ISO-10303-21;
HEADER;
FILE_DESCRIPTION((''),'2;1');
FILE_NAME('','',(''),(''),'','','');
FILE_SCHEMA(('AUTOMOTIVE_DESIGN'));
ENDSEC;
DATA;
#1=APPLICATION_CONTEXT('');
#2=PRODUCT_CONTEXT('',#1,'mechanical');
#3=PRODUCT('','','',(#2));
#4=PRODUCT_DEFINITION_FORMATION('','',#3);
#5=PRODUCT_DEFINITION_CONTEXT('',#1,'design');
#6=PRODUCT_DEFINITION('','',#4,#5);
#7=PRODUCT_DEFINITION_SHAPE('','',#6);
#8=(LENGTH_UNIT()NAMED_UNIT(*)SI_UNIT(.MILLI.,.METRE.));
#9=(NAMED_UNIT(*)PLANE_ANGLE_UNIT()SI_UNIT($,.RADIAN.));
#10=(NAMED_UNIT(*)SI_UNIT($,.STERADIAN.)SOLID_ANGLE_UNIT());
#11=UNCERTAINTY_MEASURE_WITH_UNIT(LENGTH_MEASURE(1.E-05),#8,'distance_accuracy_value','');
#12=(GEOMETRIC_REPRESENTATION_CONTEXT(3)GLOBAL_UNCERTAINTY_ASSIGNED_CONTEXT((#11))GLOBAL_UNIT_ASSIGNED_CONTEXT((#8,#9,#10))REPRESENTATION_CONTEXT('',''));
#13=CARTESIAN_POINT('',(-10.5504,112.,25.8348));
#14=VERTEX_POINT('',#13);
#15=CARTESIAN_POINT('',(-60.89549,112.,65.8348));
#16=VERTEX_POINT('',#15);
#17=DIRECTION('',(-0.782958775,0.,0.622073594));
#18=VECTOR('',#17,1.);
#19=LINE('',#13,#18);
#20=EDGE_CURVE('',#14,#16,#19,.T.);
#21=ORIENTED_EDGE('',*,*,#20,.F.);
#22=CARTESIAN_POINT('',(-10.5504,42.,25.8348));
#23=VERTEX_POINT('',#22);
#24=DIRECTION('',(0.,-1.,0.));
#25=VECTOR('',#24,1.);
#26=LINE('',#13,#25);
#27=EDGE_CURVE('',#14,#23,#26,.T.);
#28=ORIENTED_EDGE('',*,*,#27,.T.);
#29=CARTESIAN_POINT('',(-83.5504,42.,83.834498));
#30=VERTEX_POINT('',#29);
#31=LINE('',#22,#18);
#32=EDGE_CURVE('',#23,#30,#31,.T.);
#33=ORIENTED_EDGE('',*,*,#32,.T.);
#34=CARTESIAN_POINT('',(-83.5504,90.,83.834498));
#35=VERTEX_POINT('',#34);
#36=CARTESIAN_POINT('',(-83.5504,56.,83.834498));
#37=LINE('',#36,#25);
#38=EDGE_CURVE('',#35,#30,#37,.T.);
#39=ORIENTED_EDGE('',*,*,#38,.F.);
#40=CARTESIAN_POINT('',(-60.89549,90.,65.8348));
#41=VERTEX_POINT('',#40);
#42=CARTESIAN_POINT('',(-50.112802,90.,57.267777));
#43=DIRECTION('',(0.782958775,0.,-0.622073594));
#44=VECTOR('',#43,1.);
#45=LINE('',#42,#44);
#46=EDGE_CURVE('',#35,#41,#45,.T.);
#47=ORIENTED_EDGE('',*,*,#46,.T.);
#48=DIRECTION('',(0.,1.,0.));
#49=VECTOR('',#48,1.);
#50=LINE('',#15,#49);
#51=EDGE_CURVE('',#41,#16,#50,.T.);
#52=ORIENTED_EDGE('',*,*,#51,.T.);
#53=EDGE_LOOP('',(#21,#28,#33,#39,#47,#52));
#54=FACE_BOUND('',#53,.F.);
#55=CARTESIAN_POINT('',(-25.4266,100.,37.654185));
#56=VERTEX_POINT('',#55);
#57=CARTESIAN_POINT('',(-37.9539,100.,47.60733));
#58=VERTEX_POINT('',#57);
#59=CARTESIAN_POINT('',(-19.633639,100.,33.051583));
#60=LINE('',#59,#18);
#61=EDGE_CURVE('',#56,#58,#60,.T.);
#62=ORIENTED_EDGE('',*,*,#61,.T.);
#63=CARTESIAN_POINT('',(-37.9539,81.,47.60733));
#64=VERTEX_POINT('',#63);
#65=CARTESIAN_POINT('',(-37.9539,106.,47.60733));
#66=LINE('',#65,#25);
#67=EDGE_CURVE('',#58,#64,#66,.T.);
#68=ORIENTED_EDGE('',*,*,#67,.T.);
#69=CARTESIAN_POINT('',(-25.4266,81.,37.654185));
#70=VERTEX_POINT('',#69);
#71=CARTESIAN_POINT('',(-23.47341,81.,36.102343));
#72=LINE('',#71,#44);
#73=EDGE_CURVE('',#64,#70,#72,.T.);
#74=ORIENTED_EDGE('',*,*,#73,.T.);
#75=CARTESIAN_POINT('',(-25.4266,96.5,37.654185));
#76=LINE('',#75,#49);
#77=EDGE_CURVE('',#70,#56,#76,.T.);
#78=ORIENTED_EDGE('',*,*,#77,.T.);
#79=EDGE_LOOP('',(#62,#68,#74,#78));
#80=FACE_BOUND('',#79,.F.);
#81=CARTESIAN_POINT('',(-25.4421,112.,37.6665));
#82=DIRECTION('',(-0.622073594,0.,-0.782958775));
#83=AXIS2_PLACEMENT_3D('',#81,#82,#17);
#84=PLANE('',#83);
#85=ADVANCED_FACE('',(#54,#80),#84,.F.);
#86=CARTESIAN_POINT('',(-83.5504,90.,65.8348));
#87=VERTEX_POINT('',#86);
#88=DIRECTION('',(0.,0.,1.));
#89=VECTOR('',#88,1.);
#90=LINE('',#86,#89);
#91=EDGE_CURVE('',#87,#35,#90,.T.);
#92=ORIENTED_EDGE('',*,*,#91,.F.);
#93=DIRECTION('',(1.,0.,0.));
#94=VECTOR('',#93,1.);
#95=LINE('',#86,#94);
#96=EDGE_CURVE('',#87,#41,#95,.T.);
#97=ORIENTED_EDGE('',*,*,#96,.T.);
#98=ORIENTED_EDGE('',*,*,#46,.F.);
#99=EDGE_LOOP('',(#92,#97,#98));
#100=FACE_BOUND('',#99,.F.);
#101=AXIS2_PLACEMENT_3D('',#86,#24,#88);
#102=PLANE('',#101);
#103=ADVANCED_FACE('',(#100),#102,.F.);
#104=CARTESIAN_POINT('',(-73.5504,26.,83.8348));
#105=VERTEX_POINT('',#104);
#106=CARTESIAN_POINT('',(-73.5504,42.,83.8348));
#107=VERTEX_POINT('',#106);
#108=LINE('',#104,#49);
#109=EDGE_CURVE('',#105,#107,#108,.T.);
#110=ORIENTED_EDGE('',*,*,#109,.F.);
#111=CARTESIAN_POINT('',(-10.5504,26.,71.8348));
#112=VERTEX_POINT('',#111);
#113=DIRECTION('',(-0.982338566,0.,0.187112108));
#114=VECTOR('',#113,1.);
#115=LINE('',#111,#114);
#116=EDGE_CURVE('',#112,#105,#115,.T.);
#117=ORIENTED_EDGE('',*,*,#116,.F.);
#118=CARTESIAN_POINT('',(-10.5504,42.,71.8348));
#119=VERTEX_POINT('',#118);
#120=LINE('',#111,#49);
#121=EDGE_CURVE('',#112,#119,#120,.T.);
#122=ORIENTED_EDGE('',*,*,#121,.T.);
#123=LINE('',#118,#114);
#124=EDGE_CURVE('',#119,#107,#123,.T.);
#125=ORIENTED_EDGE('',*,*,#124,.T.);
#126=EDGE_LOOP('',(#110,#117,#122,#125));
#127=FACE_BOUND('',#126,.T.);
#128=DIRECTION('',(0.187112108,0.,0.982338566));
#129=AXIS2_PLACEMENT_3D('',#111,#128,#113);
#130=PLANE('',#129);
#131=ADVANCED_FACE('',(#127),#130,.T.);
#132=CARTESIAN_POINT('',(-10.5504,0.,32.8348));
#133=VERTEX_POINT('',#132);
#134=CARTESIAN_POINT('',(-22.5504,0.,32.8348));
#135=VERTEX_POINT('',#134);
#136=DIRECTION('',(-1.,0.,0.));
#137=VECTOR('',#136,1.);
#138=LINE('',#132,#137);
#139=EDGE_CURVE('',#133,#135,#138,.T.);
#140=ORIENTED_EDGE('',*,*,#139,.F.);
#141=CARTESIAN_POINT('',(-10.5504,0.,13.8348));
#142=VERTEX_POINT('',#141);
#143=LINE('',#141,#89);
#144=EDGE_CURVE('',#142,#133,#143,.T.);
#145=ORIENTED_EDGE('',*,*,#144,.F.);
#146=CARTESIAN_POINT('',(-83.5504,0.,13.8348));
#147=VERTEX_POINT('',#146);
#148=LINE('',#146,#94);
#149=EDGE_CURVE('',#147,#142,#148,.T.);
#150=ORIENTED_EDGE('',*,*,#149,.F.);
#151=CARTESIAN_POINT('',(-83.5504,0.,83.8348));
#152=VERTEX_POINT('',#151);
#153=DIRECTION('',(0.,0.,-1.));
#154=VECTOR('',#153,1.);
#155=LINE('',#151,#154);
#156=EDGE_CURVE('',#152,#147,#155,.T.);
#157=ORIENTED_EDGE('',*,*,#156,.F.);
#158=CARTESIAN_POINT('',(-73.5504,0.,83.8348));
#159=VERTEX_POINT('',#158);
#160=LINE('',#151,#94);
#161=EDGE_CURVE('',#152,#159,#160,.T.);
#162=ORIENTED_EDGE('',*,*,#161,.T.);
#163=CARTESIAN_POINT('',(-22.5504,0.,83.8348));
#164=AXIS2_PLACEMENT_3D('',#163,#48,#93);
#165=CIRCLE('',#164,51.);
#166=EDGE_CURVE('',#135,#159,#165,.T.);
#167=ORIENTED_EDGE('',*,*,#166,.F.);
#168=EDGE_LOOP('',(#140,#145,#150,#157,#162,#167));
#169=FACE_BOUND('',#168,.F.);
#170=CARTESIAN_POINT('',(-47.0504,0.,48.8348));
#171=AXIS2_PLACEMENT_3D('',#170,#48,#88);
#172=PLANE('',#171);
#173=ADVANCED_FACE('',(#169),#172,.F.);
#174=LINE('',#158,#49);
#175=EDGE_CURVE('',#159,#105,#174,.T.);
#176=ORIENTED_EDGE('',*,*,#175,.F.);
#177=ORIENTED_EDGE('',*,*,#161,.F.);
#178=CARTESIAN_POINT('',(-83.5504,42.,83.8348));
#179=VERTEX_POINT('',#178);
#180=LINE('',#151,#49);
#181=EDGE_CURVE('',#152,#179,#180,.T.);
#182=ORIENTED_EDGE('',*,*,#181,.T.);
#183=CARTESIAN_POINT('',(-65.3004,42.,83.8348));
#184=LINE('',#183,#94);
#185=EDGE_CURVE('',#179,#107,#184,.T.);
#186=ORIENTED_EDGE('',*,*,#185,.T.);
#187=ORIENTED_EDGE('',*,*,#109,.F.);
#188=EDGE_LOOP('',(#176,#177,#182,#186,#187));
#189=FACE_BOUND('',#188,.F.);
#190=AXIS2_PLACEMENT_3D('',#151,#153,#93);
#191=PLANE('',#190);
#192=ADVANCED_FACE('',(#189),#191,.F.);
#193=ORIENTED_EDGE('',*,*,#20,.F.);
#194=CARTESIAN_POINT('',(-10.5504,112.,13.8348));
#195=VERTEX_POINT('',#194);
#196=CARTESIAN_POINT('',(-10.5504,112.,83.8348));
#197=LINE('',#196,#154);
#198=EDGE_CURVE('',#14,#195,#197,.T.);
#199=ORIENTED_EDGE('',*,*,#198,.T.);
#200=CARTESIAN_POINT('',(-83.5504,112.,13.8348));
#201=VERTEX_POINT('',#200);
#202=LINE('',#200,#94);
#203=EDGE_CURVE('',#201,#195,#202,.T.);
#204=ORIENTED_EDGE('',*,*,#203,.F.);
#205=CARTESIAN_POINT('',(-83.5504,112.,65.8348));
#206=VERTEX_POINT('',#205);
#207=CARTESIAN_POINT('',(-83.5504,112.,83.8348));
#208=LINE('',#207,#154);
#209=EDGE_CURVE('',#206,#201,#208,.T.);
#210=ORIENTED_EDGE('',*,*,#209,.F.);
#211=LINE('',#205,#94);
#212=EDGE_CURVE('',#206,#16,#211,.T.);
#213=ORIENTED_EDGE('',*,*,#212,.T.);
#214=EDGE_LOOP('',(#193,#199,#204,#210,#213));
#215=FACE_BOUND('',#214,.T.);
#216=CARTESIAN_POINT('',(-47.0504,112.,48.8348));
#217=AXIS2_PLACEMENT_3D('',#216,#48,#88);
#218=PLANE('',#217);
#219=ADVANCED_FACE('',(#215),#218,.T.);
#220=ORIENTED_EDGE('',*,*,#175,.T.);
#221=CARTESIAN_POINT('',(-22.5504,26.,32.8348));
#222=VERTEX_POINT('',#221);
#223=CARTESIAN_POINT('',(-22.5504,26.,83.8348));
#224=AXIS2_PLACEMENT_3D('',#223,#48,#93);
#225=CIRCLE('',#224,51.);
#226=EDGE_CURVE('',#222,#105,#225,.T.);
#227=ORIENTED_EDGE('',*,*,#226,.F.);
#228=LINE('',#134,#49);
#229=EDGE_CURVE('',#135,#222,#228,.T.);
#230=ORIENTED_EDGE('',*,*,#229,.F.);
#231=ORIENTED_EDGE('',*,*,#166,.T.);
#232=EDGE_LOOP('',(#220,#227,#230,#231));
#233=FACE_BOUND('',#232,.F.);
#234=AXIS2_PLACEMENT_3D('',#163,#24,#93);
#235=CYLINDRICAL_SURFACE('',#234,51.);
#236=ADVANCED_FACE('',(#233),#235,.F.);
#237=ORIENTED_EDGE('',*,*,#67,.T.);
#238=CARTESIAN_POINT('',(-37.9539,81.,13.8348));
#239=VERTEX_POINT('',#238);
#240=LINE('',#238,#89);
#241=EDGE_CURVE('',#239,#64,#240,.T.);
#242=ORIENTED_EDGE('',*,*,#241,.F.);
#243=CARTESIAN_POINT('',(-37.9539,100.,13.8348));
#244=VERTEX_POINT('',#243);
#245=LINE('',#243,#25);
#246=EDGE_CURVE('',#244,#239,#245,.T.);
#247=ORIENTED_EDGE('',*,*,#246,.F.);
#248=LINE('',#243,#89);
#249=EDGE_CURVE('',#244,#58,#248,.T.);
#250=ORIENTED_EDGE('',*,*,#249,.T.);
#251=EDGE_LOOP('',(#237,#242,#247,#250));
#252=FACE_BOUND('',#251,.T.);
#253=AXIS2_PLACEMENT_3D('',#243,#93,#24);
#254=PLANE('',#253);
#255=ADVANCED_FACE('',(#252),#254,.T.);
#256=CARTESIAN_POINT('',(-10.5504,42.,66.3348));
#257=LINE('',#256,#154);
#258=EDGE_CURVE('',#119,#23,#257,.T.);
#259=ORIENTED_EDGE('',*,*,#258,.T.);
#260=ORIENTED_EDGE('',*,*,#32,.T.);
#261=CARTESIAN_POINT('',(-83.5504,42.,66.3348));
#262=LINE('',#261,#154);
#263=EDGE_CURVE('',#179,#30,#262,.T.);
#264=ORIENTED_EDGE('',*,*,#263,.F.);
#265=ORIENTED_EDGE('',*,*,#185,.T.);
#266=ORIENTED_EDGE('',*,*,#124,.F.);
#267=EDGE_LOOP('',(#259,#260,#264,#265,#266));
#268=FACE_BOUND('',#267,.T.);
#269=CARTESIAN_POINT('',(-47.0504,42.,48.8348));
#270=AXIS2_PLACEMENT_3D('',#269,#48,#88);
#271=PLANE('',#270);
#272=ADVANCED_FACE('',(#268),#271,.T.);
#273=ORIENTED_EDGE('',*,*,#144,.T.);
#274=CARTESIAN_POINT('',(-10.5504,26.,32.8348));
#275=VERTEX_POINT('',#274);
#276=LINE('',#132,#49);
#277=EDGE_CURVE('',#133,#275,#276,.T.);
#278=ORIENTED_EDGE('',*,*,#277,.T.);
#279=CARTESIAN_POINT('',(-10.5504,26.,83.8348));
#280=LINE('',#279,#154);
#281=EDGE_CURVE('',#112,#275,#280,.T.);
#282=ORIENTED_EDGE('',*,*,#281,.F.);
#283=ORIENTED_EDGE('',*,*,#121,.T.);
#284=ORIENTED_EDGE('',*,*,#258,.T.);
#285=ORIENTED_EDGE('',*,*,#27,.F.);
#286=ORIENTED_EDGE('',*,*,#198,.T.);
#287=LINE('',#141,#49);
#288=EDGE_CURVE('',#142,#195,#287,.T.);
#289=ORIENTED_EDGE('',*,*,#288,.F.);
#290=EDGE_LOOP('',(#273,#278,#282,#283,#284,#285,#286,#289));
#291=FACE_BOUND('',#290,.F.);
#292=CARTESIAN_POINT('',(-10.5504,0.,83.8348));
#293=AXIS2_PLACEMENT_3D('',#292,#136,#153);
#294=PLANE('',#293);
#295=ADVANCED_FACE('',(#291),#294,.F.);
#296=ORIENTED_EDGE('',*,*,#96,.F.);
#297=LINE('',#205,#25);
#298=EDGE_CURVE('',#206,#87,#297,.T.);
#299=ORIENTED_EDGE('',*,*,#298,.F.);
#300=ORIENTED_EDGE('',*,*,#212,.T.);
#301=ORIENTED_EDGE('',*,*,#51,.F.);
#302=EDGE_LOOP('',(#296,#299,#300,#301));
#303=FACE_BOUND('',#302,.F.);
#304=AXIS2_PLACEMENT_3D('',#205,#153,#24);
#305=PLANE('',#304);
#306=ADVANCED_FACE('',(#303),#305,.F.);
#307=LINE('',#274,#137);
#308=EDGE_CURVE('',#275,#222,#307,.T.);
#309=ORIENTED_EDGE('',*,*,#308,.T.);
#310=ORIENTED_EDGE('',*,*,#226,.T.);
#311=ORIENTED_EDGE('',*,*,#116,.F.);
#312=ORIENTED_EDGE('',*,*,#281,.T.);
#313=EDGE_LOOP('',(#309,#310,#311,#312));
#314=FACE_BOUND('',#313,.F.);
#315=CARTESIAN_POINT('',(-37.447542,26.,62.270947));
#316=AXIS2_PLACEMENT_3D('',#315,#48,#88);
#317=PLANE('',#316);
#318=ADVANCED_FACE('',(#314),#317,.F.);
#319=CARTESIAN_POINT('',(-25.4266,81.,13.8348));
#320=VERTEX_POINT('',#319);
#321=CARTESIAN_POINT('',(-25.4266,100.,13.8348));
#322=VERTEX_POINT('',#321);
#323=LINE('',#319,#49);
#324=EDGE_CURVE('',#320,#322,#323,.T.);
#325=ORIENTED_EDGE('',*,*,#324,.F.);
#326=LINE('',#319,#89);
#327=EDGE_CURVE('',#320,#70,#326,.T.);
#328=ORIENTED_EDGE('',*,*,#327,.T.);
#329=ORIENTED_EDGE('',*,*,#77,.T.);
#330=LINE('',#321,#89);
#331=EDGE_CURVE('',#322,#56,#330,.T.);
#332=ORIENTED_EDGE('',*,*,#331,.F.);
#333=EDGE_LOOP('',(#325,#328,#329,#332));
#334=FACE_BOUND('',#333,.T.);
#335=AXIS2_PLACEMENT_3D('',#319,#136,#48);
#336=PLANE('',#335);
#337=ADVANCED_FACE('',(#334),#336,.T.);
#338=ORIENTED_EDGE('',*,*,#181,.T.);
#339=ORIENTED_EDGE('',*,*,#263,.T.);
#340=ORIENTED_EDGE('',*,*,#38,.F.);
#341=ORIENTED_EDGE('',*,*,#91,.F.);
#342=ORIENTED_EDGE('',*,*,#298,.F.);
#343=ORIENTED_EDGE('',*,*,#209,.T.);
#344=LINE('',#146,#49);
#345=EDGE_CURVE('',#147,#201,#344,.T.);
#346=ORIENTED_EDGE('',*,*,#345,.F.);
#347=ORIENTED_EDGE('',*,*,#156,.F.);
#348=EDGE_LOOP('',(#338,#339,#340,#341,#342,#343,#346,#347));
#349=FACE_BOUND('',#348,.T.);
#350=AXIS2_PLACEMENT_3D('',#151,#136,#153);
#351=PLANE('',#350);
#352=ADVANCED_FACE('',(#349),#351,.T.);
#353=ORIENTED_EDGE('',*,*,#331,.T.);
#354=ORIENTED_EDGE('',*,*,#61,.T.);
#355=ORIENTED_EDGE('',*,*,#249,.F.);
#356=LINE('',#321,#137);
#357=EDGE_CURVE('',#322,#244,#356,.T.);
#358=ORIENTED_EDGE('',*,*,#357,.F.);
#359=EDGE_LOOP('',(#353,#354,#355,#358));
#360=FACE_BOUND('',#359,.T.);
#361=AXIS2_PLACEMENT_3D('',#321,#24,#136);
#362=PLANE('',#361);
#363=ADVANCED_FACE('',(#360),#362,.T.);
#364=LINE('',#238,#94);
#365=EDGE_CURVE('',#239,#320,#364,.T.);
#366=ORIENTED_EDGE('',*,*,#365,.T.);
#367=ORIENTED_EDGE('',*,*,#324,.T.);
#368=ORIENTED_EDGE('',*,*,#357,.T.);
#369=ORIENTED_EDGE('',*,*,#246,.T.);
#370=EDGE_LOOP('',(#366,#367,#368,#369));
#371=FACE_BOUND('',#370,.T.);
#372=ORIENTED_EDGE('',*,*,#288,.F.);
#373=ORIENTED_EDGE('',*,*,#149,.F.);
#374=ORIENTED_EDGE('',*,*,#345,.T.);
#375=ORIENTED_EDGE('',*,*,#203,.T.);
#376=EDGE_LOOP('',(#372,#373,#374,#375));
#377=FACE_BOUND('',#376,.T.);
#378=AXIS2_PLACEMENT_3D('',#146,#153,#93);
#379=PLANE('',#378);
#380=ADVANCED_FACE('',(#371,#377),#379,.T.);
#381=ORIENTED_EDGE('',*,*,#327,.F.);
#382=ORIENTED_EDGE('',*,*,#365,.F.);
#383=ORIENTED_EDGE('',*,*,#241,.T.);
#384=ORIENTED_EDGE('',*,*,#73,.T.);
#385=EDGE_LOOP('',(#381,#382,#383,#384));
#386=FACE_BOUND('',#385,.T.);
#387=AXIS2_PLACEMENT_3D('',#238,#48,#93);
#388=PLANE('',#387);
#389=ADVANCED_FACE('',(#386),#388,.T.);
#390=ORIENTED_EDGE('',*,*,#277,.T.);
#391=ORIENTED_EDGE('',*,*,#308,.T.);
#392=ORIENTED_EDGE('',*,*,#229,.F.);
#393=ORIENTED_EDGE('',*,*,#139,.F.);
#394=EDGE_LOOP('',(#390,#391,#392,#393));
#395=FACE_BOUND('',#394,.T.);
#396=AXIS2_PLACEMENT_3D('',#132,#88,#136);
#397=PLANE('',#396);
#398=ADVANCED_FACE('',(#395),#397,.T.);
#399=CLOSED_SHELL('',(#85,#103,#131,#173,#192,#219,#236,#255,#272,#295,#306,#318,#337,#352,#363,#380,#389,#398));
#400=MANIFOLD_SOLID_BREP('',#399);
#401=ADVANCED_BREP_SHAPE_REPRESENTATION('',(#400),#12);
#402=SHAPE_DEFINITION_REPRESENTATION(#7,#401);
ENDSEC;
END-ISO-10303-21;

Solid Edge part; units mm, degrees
sketch "Sketch1" plane through (0, 0, 0) normal (0, -1, 0) x (1, 0, 0)
  line L0 (-83.5504, 83.8348) -> (-73.5504, 83.8348)
  line L1 (-73.5504, 83.8348) -> (-10.5504, 83.8348)
  line L2 (-10.5504, 83.8348) -> (-10.5504, 32.8348)
  line L3 (-10.5504, 13.8348) -> (-10.5504, 32.8348)
  line L4 (-83.5504, 13.8348) -> (-10.5504, 13.8348)
  line L5 (-83.5504, 83.8348) -> (-83.5504, 13.8348)
extrude "Protrusion1" add sketch "Sketch1" against normal blind 112
sketch "Sketch2" plane through (0, 0, 0) normal (0, -1, 0) x (1, 0, 0)
  arc A0 (-22.5504, 32.8348) -> (-73.5504, 83.8348) centre (-22.5504, 83.8348) cw
  line L0 (-10.5504, 32.8348) -> (-22.5504, 32.8348)
  line L1 (-73.5504, 83.8348) -> (-10.5504, 83.8348)
  line L2 (-10.5504, 83.8348) -> (-10.5504, 32.8348)
extrude "ExtrudedCutout_1" cut sketch "Sketch2" against normal blind 26
sketch "Sketch3" plane through (-83.5504, 56, 48.8348) normal (-1, 0, 0) x (0, -1, 0)
  line L0 (-34, 35) -> (-56, 35)
  line L1 (-56, 35) -> (-56, 17)
  line L2 (-56, 17) -> (-34, 17)
  line L3 (-34, 17) -> (-34, 35)
extrude "Cutout_2" cut sketch "Sketch3" against normal blind 39.1363
sketch "Sketch4" plane through (-47.0504, 112, 48.8348) normal (0, 1, 0) x (-1, 0, 0)
  line L0 (-36.5, -23) -> (-21.6083, -11.1683)
  line L1 (-36.5, -35) -> (-36.5, -23)
extrude "Cutout_3" cut sketch "Sketch4" against normal blind 70 material side at (-17.9651, 112, 31.7898)
sketch "Sketch5" plane through (-42.0504, 26, 58.3348) normal (0, -1, 0) x (1, 0, 0)
  line L0 (-31.5, 25.5) -> (31.5, 25.5)
  line L1 (31.5, 25.5) -> (31.5, 13.5)
  line L2 (31.5, 13.5) -> (-31.5, 25.5)
extrude "Cutout1" cut sketch "Sketch5" against normal blind 16
sketch "Sketch6" plane through (-47.0504, 56, 13.8348) normal (0, 0, -1) x (-1, 0, 0)
  line L0 (-21.6238, 44) -> (-9.0965, 44)
  line L1 (-9.0965, 44) -> (-9.0965, 25)
  line L2 (-9.0965, 25) -> (-21.6238, 25)
  line L3 (-21.6238, 25) -> (-21.6238, 44)
extrude "Cutout2" cut sketch "Sketch6" against normal blind 37.3498
